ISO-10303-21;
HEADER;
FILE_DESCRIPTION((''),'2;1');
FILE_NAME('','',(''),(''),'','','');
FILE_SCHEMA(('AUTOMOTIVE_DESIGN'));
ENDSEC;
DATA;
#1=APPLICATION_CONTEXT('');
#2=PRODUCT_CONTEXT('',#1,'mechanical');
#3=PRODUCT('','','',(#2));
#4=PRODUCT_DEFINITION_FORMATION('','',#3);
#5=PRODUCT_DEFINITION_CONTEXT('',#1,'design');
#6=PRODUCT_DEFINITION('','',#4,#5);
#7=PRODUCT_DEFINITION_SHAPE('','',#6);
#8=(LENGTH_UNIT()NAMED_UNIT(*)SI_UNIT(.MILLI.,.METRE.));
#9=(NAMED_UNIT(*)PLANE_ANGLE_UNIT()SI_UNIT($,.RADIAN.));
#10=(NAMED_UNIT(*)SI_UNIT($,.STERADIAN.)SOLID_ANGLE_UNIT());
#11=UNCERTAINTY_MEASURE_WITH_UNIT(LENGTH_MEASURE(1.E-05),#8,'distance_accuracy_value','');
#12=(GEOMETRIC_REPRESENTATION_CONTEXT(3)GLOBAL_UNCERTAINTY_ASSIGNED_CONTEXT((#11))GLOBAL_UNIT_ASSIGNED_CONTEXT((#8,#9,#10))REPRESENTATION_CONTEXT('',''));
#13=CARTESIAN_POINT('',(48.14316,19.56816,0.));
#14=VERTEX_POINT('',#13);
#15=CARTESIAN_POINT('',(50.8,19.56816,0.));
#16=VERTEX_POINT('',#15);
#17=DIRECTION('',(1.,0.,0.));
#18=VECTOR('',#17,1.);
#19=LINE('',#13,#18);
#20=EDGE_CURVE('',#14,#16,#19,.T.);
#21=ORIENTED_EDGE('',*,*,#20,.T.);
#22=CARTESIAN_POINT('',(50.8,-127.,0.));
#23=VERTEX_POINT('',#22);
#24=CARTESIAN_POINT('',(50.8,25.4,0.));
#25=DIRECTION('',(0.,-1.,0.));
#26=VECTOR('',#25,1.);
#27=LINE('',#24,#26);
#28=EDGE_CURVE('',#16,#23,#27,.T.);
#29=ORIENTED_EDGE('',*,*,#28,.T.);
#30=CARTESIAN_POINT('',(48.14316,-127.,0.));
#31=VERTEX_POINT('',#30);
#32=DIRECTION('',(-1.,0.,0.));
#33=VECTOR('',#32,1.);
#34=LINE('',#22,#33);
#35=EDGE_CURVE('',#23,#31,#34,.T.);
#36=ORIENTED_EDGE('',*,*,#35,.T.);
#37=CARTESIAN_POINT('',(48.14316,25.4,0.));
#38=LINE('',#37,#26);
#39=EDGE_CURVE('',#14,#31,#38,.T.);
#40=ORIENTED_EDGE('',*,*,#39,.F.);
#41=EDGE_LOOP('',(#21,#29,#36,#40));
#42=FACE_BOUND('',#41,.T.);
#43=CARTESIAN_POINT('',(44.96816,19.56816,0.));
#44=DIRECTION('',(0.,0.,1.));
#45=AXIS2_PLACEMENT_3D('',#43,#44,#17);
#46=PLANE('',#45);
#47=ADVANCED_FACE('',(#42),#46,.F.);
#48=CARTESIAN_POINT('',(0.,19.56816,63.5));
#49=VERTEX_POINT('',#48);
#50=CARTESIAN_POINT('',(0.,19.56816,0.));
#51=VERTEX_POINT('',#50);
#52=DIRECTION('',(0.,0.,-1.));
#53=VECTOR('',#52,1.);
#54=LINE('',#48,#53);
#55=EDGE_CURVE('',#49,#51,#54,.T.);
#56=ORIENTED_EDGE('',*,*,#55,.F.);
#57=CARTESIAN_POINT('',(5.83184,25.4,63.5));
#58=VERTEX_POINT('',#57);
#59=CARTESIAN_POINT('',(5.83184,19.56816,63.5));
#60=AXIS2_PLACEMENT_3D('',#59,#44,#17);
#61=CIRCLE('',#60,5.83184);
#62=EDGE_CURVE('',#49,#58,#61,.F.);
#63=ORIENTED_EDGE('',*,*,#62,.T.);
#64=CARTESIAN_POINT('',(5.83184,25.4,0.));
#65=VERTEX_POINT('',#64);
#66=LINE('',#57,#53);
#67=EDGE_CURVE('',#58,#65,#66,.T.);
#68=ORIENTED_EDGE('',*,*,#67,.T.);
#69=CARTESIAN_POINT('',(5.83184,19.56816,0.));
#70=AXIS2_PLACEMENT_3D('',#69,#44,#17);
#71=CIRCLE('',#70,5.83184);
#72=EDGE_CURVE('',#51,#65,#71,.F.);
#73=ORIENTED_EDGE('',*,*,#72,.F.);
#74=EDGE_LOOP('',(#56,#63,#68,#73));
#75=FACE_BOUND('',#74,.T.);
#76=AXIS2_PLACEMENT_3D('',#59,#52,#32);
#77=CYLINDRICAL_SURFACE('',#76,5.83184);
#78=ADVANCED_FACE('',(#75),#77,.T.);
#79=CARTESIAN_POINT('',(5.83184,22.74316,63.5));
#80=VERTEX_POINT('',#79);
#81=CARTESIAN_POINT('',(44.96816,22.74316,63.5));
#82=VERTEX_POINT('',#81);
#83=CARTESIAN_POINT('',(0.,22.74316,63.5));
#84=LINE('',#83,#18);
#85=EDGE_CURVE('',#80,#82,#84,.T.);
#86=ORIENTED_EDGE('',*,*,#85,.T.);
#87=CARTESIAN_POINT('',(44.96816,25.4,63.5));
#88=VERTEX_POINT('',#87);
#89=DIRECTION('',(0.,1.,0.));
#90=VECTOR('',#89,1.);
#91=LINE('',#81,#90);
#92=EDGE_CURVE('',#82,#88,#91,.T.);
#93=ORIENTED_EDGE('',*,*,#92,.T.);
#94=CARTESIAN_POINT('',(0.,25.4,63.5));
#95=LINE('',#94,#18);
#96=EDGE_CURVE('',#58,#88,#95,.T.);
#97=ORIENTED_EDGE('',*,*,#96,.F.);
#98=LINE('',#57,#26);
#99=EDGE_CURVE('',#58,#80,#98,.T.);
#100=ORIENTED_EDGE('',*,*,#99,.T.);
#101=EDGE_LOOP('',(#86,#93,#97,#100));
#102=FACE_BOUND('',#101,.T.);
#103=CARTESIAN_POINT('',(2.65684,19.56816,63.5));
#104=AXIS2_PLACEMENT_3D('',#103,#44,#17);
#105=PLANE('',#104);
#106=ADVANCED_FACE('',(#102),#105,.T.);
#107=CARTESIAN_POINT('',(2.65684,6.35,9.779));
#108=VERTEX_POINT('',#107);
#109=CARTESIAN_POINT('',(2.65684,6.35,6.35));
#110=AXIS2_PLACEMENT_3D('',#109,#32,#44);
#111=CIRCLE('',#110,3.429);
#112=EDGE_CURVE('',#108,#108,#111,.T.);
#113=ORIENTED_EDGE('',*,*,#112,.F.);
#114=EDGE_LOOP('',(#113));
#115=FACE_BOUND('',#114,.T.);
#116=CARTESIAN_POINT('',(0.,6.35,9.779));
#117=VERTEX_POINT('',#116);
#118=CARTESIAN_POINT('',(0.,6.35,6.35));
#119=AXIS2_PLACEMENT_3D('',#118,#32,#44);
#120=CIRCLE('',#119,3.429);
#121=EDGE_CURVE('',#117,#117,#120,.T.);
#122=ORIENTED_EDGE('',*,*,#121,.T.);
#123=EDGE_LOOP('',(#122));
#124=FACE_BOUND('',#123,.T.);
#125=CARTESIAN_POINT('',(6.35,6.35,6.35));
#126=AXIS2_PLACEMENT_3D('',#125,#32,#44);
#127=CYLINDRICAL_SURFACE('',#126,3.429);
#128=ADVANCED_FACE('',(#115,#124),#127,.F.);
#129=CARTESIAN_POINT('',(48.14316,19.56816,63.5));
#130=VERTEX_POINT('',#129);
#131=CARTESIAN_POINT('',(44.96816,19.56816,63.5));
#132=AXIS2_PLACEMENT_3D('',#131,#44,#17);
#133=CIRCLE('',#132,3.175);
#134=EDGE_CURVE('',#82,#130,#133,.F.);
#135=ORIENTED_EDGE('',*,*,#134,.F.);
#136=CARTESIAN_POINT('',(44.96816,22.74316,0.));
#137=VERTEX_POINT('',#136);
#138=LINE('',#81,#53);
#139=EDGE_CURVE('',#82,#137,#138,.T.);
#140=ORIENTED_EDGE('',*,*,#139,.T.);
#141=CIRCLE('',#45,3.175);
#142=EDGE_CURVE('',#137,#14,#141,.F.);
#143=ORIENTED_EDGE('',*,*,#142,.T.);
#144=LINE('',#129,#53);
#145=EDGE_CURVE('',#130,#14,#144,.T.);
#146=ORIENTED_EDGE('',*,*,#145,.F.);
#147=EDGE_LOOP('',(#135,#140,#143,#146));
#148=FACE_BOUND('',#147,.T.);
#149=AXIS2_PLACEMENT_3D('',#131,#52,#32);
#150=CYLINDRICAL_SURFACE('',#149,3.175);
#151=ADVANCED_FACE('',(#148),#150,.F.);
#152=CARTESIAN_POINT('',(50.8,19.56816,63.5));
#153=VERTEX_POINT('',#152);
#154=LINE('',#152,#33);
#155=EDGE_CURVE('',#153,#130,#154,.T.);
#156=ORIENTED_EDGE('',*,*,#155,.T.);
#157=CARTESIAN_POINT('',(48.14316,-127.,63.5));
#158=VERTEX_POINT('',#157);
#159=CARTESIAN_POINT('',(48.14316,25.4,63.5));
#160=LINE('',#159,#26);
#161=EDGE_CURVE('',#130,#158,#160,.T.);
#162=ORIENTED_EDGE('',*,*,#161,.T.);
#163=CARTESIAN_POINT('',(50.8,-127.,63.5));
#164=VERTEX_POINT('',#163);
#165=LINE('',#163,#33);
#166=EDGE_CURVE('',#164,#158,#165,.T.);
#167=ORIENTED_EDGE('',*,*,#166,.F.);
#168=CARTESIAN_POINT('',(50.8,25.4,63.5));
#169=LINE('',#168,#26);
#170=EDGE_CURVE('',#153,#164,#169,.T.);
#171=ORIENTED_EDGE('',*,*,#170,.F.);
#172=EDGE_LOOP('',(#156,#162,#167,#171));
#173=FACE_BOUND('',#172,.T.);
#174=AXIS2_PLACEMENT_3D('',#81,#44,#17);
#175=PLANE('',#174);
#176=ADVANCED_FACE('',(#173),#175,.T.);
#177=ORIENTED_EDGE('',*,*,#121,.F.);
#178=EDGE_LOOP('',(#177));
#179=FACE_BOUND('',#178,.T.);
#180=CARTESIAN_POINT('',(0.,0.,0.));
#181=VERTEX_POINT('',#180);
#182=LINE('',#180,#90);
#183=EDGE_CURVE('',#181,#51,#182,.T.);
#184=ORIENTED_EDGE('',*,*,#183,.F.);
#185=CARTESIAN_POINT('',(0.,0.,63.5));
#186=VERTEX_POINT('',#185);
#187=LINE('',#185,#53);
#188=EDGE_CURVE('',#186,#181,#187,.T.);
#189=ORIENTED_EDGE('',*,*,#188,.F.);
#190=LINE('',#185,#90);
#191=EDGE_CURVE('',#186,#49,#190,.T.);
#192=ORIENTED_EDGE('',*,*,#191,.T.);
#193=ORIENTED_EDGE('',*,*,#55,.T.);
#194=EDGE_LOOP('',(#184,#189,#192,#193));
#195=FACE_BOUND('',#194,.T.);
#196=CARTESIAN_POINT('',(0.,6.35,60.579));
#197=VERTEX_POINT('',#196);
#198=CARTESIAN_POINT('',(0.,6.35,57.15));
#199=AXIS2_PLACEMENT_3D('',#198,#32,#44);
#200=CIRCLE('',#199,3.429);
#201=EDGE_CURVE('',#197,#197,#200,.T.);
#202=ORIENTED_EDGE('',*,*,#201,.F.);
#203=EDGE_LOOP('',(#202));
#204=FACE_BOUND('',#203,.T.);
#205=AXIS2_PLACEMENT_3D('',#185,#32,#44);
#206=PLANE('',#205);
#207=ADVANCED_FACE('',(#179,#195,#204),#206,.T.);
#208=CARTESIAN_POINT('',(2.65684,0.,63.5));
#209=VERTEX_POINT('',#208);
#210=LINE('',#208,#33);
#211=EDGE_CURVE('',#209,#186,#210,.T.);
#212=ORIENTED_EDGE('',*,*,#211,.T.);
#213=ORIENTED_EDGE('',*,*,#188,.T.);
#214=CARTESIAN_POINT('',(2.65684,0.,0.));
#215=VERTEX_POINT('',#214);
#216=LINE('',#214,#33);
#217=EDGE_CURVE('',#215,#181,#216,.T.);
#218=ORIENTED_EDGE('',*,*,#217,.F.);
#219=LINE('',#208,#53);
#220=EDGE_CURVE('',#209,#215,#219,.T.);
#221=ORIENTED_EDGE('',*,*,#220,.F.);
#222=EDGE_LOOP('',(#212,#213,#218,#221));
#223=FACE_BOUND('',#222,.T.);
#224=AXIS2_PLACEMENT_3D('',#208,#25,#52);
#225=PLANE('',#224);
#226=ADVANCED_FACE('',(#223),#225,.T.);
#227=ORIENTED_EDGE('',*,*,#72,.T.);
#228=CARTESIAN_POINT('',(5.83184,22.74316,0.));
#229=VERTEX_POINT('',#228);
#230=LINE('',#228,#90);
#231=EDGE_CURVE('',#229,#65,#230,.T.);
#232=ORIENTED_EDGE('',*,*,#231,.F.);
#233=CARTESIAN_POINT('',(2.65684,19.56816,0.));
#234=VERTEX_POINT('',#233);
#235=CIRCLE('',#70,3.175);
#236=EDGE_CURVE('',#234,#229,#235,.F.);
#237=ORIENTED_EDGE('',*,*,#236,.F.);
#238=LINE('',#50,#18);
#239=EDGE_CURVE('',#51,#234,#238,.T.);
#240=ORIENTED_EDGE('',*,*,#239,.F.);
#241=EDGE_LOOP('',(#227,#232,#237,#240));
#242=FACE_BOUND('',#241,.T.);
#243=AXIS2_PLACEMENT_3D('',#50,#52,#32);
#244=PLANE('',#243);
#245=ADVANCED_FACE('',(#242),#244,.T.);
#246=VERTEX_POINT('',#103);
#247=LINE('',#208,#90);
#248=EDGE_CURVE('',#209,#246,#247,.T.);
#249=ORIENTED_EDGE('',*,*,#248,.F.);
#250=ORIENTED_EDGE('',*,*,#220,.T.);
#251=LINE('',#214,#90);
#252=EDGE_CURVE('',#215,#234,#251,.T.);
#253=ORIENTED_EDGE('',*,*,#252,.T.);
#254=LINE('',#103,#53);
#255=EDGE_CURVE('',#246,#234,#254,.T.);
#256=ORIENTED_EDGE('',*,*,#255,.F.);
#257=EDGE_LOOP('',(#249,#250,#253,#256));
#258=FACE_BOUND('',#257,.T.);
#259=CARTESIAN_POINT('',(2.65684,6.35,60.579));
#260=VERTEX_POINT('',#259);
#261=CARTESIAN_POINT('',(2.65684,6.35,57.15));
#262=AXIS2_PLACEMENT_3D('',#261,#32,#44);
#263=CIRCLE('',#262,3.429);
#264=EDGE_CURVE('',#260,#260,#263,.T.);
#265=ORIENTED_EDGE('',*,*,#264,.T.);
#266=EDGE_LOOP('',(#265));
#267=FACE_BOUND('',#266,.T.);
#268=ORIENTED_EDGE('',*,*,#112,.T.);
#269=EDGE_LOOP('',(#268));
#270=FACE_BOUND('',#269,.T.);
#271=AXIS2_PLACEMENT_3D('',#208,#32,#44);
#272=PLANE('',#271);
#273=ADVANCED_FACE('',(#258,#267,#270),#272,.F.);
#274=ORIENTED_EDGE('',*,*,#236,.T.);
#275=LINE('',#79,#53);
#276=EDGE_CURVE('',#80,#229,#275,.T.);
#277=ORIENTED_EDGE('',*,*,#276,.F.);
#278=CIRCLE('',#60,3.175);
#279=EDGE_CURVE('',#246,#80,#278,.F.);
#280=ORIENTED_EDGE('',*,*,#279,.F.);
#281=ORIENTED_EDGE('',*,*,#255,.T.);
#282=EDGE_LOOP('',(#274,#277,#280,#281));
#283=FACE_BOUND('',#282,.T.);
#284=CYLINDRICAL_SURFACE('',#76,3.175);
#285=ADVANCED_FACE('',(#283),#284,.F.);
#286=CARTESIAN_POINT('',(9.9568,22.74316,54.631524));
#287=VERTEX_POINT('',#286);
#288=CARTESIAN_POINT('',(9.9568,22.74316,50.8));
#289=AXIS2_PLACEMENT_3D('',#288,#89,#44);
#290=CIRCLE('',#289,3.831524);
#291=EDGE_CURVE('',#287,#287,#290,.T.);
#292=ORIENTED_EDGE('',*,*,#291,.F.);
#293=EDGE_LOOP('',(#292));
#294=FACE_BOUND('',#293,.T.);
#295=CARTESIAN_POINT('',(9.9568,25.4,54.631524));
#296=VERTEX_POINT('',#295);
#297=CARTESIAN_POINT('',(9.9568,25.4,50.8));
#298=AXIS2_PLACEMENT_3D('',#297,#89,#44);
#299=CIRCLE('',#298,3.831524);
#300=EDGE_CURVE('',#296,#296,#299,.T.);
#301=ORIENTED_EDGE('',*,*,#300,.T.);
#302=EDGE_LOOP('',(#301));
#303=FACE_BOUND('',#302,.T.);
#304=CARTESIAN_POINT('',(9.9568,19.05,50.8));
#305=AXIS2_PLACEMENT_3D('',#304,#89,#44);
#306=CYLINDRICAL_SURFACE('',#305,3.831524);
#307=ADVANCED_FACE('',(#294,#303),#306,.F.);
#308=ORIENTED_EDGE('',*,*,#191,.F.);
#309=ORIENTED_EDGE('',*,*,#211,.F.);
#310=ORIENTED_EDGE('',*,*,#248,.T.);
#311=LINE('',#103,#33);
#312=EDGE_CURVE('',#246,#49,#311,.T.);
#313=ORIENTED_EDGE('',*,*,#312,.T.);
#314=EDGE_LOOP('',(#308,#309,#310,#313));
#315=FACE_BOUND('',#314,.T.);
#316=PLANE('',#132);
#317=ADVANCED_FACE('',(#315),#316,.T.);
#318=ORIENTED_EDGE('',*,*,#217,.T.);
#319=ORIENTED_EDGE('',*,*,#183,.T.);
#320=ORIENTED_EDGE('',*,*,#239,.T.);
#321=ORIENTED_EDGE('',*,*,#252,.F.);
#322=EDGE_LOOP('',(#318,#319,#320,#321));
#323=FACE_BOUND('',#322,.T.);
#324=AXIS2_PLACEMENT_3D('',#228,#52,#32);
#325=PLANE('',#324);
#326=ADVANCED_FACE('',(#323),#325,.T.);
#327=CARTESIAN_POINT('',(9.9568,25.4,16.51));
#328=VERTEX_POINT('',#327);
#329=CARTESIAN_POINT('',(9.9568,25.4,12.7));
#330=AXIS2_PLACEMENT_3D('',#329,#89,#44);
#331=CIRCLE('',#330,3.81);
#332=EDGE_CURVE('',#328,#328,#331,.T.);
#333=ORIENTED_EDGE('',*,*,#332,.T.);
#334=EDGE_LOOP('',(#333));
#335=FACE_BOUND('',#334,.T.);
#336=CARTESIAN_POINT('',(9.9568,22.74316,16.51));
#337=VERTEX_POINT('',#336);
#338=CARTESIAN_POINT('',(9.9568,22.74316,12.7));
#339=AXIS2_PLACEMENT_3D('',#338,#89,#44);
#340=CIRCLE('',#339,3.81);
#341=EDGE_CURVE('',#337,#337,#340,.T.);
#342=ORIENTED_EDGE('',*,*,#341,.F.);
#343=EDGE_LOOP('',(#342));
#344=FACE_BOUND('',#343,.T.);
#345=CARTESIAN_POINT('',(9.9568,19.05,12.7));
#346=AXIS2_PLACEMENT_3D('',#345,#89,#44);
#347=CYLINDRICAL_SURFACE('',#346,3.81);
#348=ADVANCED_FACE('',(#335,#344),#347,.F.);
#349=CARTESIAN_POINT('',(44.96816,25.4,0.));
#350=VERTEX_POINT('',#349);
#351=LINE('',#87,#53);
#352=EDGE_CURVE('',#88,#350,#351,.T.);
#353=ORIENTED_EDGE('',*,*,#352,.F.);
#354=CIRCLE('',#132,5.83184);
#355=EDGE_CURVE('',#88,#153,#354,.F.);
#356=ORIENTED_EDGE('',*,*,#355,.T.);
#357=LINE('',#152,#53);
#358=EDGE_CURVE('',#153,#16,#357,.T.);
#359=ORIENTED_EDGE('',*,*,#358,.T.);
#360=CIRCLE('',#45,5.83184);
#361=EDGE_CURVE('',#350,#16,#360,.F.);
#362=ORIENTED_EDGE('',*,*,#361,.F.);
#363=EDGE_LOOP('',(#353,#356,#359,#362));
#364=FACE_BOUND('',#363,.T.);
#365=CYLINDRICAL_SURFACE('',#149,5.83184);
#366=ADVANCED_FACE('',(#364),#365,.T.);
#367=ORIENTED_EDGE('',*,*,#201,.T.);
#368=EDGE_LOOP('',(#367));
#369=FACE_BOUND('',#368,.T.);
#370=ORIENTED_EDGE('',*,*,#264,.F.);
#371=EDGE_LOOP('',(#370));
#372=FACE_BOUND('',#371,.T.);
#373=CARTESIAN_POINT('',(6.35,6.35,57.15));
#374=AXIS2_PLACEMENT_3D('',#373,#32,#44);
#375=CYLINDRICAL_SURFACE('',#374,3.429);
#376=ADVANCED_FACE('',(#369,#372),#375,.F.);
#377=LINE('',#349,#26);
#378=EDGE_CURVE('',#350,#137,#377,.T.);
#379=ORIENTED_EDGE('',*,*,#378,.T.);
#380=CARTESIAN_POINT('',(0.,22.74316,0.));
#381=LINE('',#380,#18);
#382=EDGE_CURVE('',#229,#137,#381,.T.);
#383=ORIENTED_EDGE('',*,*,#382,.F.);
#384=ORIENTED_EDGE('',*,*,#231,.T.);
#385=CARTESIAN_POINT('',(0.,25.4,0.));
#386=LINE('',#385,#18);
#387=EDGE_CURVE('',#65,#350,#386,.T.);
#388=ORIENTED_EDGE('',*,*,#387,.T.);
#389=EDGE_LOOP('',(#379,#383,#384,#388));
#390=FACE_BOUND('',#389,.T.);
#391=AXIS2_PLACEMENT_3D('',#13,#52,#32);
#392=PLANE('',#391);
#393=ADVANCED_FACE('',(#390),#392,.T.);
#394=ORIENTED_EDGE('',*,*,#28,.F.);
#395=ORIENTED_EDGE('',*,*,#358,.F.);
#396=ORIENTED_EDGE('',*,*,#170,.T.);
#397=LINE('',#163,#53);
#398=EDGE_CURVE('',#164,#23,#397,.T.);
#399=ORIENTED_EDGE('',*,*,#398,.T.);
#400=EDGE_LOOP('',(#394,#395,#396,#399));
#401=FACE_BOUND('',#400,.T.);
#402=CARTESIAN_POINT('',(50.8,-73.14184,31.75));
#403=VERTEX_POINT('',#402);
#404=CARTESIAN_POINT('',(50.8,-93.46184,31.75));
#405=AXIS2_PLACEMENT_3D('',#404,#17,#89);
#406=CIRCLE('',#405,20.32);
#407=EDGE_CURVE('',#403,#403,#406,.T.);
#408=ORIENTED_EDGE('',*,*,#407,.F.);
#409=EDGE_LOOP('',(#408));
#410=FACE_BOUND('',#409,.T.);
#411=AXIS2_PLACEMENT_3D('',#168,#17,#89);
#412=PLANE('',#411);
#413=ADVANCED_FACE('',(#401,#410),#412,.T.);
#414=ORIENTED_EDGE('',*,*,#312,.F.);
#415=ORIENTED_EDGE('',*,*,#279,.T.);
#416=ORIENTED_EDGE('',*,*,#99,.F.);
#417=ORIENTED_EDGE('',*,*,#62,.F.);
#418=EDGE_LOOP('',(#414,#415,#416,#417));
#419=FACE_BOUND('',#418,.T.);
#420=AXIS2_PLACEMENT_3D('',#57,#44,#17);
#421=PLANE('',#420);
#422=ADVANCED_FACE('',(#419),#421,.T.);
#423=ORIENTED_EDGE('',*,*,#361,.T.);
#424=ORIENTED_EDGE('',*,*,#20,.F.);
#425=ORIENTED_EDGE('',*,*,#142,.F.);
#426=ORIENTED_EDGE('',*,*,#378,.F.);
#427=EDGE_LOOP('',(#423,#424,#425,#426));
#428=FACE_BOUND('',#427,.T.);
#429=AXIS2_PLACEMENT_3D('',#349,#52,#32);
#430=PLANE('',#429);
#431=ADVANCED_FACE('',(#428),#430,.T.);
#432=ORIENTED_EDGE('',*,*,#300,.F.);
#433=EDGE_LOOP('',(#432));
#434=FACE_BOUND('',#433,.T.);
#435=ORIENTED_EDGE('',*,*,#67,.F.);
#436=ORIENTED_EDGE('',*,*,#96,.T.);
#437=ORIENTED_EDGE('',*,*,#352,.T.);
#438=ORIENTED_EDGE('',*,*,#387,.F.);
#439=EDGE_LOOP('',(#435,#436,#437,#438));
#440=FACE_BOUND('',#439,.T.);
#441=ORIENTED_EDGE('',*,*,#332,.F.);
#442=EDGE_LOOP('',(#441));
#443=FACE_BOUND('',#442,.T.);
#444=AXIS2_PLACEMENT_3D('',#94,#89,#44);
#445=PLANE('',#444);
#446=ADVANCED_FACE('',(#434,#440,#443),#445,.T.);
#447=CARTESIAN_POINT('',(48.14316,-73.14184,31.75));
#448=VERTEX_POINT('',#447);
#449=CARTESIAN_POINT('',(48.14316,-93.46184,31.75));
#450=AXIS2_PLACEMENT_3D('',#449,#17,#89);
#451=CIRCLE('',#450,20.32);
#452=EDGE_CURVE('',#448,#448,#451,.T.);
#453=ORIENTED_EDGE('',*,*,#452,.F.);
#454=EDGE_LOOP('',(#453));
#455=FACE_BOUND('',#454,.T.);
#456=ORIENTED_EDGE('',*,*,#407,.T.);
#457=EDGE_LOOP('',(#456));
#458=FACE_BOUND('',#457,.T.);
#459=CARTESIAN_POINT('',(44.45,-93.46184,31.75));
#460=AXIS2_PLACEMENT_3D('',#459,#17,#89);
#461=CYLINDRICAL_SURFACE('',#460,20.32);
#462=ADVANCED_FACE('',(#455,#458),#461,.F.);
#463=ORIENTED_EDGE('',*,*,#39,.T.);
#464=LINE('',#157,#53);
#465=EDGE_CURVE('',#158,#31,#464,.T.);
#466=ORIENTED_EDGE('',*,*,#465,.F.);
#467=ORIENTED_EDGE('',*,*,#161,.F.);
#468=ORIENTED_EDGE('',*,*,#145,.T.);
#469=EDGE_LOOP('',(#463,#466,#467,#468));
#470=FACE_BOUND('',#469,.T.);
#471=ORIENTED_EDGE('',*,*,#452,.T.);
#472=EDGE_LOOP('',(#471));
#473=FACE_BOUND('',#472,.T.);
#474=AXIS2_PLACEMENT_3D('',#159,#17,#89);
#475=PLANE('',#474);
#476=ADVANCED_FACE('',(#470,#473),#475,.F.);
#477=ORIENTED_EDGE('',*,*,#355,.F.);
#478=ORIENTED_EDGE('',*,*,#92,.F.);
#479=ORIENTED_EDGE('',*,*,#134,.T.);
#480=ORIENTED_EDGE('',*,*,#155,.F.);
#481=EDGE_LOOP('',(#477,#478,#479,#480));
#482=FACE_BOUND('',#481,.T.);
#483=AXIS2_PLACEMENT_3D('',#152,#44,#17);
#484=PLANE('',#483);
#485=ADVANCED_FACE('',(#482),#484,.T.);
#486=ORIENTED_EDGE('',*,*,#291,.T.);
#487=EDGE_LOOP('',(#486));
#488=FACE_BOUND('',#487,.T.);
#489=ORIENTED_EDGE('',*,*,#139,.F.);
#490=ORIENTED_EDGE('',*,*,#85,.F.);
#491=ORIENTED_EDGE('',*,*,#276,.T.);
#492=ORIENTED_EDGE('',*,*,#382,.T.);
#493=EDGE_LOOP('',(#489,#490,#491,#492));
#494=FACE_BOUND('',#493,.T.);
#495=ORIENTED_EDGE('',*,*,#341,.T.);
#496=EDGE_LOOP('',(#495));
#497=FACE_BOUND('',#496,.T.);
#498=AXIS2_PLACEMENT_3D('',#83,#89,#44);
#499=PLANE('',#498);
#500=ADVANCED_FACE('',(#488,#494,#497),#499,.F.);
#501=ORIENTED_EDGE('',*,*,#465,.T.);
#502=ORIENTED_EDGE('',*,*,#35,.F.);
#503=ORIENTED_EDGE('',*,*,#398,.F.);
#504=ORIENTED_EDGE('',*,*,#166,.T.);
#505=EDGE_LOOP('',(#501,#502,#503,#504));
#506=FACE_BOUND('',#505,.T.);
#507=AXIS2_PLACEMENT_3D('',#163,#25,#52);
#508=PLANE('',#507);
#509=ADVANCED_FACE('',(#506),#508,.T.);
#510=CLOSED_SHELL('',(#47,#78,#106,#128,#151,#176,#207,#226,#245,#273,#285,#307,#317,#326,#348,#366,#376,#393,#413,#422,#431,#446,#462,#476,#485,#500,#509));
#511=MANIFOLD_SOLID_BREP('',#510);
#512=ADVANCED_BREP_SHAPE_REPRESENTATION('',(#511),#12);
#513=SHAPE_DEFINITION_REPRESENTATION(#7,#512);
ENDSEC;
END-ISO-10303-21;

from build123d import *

# Parameters (mm, degrees)
BASE_FLANGE1_DEPTH = 63.5
SKETCH6_R          = 3.429
CUT_EXTRUDE1_DEPTH = 6.35
SKETCH7_R          = 20.32
CUT_EXTRUDE2_DEPTH = 6.35
SKETCH8_R          = 3.81
SKETCH8_R_2        = 3.831524444
CUT_EXTRUDE3_DEPTH = 6.35


# Read off the part's stored shape, not the designer's step: Base-Flange1
with BuildPart() as part:
    # Base-Flange1 outline → Base-Flange1 (new body)
    with BuildSketch(Plane.XY):
        with BuildLine():
            Line((48.14316, 19.56816), (48.14316, -127))
            Line((48.14316, -127), (50.8, -127))
            Line((50.8, -127), (50.8, 19.56816))
            ThreePointArc((50.8, 19.56816), (49.091893611, 23.691893611), (44.96816, 25.4))
            Line((44.96816, 25.4), (5.83184, 25.4))
            ThreePointArc((5.83184, 25.4), (1.708106389, 23.691893611), (0, 19.56816))
            Line((0, 19.56816), (0, 0))
            Line((0, 0), (2.65684, 0))
            Line((2.65684, 0), (2.65684, 19.56816))
            ThreePointArc((2.65684, 19.56816), (3.58677597, 21.81322403), (5.83184, 22.74316))
            Line((5.83184, 22.74316), (44.96816, 22.74316))
            ThreePointArc((44.96816, 22.74316), (47.21322403, 21.81322403), (48.14316, 19.56816))
        make_face()
    extrude(amount=BASE_FLANGE1_DEPTH)

    # Sketch6 → Cut-Extrude1 (cut)
    with BuildSketch(Plane.ZY):
        with Locations((6.35, 6.35)):
            Circle(SKETCH6_R)
        with Locations((57.15, 6.35)):
            Circle(SKETCH6_R)
    extrude(amount=-CUT_EXTRUDE1_DEPTH, mode=Mode.SUBTRACT)

    # Sketch7 → Cut-Extrude2 (cut)
    with BuildSketch(Plane(origin=(50.8, 0, 0), x_dir=(0, 0, -1), z_dir=(1, 0, 0))):
        with Locations(Location((-31.75, -93.46184, 0), (0, 0, 90))):
            Circle(SKETCH7_R)
    extrude(amount=-CUT_EXTRUDE2_DEPTH, mode=Mode.SUBTRACT)

    # Sketch8 → Cut-Extrude3 (cut)
    with BuildSketch(Plane(origin=(0, 25.4, 0), x_dir=(1, 0, 0), z_dir=(0, 1, 0))):
        with Locations(Location((9.9568, -12.699999998, 0), (0, 0, 270))):
            Circle(SKETCH8_R)
        with Locations(Location((9.9568, -50.799999998, 0), (0, 0, 270))):
            Circle(SKETCH8_R_2)
    extrude(amount=-CUT_EXTRUDE3_DEPTH, mode=Mode.SUBTRACT)


solid = part.part
